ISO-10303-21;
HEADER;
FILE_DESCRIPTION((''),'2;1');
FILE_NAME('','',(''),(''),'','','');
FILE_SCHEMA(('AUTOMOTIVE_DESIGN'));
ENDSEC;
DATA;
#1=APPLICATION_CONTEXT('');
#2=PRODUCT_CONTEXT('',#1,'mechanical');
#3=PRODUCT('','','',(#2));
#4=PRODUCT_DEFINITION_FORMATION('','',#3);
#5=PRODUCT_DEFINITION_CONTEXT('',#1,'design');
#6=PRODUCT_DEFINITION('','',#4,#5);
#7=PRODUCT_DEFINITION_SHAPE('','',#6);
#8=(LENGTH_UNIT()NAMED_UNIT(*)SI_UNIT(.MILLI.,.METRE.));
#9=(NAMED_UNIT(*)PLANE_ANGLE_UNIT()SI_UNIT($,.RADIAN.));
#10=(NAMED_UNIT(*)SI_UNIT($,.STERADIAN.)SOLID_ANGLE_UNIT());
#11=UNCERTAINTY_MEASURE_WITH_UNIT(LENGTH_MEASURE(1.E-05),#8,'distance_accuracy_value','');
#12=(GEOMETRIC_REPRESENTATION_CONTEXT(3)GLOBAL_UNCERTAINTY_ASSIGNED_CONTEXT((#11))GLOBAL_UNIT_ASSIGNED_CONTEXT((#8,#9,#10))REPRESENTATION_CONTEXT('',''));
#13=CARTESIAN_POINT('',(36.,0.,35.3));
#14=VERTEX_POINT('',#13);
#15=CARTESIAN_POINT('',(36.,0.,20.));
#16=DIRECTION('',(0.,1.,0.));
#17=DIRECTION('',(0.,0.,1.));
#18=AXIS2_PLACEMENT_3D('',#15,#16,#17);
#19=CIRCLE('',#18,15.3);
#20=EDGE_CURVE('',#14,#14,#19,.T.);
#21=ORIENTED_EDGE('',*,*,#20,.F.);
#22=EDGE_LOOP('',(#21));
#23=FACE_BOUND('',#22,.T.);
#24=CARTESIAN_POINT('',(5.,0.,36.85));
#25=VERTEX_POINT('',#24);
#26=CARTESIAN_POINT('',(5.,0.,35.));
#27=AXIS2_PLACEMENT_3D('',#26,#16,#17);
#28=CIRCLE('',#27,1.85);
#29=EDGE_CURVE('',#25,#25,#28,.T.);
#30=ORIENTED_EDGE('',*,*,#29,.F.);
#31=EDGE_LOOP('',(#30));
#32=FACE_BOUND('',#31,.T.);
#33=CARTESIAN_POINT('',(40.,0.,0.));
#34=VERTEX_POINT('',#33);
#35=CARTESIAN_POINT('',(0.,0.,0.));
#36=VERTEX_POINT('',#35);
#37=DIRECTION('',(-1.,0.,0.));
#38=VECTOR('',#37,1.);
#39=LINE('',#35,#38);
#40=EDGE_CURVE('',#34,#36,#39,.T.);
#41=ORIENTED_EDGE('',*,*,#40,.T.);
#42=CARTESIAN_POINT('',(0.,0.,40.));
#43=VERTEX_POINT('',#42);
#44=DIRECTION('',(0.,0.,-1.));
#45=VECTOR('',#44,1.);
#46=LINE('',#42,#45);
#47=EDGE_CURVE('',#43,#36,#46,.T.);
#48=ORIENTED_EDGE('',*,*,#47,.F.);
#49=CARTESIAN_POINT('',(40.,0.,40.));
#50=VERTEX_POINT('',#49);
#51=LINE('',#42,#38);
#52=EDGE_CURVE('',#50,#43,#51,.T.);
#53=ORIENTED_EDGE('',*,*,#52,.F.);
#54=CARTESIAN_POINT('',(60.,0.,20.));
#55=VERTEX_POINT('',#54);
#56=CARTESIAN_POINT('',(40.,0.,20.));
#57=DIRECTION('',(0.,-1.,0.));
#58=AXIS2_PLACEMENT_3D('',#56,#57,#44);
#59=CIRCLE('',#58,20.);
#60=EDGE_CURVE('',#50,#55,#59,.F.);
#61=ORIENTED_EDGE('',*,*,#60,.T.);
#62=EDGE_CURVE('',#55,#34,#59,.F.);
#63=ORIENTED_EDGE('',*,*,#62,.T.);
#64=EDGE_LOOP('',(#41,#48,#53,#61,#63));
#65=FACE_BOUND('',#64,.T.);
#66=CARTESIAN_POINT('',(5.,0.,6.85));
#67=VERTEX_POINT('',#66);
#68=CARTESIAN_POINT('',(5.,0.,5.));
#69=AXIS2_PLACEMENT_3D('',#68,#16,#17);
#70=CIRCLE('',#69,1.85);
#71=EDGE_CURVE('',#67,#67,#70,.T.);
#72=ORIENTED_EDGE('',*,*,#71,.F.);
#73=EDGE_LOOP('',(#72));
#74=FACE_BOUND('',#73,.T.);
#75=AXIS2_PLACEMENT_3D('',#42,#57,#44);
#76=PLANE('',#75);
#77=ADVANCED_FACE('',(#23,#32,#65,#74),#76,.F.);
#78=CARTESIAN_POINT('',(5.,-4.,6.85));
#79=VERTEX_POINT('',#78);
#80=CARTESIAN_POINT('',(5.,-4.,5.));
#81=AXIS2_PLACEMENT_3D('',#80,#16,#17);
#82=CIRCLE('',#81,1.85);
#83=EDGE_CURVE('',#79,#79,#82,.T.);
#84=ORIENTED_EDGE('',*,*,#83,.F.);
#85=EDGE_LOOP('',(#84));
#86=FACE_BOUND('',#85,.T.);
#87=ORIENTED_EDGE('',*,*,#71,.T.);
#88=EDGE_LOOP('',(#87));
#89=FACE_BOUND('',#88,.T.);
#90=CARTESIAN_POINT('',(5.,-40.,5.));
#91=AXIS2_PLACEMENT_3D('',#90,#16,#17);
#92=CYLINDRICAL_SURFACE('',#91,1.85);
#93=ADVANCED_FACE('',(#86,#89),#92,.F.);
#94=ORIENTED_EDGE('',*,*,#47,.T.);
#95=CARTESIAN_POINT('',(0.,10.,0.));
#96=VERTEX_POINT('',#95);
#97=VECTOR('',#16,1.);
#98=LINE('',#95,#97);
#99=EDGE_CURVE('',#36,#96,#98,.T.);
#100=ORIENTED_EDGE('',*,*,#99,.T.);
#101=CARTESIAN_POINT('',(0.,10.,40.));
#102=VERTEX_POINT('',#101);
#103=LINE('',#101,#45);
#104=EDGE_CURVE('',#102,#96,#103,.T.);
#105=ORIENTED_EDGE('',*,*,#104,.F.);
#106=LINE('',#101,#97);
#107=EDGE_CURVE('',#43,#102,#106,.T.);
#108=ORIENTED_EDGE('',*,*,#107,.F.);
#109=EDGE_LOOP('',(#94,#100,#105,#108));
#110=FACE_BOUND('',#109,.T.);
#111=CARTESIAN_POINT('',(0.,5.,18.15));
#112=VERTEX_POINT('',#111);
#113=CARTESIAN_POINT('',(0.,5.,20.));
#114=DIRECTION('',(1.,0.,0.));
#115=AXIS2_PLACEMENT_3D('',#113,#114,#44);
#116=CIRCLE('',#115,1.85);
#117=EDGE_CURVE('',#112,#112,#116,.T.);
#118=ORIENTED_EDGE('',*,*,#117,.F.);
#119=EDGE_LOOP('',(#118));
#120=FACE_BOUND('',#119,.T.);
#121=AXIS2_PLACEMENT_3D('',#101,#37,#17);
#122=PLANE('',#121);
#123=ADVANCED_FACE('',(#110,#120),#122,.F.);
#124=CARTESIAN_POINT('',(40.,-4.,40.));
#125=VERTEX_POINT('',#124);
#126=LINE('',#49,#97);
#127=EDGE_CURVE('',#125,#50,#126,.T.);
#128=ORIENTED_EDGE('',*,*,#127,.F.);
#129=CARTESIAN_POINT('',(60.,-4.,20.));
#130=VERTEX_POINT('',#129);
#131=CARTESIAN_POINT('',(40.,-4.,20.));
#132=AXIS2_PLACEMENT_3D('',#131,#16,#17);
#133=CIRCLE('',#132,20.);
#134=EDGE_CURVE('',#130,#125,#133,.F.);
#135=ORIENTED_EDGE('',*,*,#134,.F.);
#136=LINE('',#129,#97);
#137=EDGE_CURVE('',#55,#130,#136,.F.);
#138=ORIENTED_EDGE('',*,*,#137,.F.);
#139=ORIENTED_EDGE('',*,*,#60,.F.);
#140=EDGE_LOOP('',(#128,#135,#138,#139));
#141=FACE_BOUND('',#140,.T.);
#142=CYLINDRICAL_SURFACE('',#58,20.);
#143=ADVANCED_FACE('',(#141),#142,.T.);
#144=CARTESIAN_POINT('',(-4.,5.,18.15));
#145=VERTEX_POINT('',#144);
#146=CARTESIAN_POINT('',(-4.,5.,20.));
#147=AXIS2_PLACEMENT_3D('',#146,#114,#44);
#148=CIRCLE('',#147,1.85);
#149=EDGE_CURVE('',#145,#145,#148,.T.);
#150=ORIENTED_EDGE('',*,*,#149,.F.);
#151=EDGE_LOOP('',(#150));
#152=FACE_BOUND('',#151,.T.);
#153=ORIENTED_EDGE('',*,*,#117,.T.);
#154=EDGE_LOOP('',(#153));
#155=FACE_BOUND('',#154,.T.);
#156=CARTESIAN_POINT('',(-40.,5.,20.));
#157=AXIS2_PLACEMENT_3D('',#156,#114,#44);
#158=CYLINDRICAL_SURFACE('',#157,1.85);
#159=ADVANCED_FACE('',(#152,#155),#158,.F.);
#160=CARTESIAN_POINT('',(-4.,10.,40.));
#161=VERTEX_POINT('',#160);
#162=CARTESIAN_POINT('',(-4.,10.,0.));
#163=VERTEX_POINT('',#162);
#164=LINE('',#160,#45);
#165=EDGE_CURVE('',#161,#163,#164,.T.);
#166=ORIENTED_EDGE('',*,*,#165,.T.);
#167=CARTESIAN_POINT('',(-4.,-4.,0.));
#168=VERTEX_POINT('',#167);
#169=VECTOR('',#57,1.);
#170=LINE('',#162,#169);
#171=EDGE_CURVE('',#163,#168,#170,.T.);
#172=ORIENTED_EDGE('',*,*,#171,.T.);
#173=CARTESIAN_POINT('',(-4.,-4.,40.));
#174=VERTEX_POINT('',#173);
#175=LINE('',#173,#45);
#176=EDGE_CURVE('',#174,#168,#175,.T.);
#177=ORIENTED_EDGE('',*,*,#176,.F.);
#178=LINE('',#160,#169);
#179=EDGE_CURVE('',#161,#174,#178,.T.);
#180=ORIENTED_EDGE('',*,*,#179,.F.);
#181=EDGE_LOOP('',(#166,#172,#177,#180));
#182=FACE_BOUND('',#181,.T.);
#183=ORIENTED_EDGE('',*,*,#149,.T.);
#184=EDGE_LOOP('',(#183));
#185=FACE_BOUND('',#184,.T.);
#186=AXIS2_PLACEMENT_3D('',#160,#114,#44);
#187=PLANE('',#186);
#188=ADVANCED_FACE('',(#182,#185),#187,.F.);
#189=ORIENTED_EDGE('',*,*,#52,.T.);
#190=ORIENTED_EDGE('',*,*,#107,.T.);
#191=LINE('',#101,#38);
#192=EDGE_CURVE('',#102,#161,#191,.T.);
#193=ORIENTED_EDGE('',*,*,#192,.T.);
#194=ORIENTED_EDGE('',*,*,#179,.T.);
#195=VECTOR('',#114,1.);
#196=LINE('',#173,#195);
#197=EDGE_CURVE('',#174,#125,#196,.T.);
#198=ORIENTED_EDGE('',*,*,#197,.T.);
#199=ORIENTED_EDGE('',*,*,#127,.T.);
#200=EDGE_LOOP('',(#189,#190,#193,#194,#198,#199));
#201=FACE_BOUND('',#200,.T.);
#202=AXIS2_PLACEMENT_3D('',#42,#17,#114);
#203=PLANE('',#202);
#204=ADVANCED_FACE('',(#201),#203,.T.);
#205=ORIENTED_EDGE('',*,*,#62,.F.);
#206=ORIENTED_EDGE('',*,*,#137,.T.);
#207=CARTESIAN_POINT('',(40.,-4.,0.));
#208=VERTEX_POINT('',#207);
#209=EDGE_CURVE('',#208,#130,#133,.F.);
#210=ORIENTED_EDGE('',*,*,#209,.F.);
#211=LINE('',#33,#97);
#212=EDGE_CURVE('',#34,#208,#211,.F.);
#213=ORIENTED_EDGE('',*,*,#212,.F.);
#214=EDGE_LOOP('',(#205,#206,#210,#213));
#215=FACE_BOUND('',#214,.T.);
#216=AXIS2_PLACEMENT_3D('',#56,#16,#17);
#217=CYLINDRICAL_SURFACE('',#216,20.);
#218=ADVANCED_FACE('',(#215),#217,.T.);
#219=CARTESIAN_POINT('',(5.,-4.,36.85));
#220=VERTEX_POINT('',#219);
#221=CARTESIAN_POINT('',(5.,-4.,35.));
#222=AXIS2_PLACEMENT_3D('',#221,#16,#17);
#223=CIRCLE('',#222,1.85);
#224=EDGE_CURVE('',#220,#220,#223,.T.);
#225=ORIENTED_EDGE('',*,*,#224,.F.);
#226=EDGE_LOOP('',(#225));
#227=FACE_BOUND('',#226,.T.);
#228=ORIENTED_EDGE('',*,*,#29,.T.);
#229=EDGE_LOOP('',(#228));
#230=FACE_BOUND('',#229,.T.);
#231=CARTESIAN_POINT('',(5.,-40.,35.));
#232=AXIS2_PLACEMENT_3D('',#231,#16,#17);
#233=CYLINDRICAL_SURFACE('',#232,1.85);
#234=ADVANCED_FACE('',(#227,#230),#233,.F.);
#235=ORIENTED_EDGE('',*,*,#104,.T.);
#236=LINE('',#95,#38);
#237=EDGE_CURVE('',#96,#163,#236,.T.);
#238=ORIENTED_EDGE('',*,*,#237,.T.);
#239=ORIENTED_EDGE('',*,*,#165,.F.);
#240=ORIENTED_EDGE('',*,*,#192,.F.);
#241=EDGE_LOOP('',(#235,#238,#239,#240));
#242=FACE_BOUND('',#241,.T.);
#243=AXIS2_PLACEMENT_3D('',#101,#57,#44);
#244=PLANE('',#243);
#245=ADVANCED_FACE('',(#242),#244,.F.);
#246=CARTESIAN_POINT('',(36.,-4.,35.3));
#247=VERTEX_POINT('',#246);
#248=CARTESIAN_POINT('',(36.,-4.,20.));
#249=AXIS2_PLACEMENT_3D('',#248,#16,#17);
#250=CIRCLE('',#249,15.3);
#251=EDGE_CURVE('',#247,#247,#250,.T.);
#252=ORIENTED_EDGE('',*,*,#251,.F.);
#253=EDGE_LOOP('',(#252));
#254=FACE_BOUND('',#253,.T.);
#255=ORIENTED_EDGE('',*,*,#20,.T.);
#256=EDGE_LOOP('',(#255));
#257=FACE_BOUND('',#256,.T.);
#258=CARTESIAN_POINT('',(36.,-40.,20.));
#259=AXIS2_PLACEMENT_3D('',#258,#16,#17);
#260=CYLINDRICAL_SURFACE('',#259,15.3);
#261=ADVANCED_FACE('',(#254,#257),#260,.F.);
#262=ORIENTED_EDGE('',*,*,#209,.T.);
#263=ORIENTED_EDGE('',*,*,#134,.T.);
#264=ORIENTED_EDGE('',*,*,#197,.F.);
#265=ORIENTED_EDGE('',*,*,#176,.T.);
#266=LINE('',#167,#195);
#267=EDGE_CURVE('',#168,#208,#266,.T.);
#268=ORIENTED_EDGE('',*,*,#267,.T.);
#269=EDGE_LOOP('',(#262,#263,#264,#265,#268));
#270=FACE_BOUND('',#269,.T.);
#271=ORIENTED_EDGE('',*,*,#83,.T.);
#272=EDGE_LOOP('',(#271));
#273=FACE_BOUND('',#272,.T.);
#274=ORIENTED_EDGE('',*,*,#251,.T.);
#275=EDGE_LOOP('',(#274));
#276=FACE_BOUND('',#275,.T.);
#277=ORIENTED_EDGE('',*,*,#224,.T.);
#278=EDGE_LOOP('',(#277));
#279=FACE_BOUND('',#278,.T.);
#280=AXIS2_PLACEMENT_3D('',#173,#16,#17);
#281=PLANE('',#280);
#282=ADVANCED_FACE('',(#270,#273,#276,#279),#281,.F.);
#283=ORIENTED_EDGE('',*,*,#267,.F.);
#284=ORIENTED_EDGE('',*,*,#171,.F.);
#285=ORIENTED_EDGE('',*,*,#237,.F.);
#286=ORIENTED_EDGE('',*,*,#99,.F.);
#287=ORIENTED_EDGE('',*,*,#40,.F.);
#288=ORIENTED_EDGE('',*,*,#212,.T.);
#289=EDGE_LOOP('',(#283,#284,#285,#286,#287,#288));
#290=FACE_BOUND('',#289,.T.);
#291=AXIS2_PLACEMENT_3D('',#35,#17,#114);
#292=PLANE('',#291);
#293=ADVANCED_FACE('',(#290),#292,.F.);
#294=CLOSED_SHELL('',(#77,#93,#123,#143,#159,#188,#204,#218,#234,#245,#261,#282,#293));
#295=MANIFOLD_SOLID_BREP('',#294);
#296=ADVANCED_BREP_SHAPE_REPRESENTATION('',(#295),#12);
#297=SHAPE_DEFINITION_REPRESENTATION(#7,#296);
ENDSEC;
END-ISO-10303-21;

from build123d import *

# Parameters (mm, degrees)
EXTRUDE_1_DEPTH     = 40
SKETCH_2_R          = 1.85
CUT_EXTRUDE_1_DEPTH = 40
SKETCH_4_R          = 15.3
SKETCH_4_R_2        = 1.85
CUT_EXTRUDE_2_DEPTH = 40
FILLET_1_R          = 20


with BuildPart() as part:
    # ｽｹｯﾁ1 → ﾎﾞｽ - 押し出し1 (new body)
    with BuildSketch(Plane.XY):
        Polygon((0, 10), (0, 0), (60, 0), (60, -4), (-4, -4), (-4, 10), align=None)
    extrude(amount=EXTRUDE_1_DEPTH)

    # ｽｹｯﾁ2 → ｶｯﾄ - 押し出し1 (cut)
    with BuildSketch(Plane(origin=(0, 0, 0), x_dir=(0, 0, -1), z_dir=(1, 0, 0))):
        with Locations((-20, 5)):
            Circle(SKETCH_2_R)
    extrude(amount=-CUT_EXTRUDE_1_DEPTH, mode=Mode.SUBTRACT)

    # ｽｹｯﾁ4 → ｶｯﾄ - 押し出し2 (cut)
    with BuildSketch(Plane(origin=(0, 0, 0), x_dir=(1, 0, 0), z_dir=(0, 1, 0))):
        with Locations(Location((36, -20, 0), (0, 0, 270))):
            Circle(SKETCH_4_R)
        with Locations(Location((5, -5, 0), (0, 0, 270))):
            Circle(SKETCH_4_R_2)
        with Locations(Location((5, -35, 0), (0, 0, 270))):
            Circle(SKETCH_4_R_2)
    extrude(amount=-CUT_EXTRUDE_2_DEPTH, mode=Mode.SUBTRACT)

    # ﾌｨﾚｯﾄ1
    fillet_1_edges = [part.edges().sort_by_distance(p)[0] for p in [
        (60, -2, 0),
        (60, -2, 40),
    ]]
    fillet(fillet_1_edges, radius=FILLET_1_R - 0.0001)  # a hair under: the kernel refuses the full size


solid = part.part
